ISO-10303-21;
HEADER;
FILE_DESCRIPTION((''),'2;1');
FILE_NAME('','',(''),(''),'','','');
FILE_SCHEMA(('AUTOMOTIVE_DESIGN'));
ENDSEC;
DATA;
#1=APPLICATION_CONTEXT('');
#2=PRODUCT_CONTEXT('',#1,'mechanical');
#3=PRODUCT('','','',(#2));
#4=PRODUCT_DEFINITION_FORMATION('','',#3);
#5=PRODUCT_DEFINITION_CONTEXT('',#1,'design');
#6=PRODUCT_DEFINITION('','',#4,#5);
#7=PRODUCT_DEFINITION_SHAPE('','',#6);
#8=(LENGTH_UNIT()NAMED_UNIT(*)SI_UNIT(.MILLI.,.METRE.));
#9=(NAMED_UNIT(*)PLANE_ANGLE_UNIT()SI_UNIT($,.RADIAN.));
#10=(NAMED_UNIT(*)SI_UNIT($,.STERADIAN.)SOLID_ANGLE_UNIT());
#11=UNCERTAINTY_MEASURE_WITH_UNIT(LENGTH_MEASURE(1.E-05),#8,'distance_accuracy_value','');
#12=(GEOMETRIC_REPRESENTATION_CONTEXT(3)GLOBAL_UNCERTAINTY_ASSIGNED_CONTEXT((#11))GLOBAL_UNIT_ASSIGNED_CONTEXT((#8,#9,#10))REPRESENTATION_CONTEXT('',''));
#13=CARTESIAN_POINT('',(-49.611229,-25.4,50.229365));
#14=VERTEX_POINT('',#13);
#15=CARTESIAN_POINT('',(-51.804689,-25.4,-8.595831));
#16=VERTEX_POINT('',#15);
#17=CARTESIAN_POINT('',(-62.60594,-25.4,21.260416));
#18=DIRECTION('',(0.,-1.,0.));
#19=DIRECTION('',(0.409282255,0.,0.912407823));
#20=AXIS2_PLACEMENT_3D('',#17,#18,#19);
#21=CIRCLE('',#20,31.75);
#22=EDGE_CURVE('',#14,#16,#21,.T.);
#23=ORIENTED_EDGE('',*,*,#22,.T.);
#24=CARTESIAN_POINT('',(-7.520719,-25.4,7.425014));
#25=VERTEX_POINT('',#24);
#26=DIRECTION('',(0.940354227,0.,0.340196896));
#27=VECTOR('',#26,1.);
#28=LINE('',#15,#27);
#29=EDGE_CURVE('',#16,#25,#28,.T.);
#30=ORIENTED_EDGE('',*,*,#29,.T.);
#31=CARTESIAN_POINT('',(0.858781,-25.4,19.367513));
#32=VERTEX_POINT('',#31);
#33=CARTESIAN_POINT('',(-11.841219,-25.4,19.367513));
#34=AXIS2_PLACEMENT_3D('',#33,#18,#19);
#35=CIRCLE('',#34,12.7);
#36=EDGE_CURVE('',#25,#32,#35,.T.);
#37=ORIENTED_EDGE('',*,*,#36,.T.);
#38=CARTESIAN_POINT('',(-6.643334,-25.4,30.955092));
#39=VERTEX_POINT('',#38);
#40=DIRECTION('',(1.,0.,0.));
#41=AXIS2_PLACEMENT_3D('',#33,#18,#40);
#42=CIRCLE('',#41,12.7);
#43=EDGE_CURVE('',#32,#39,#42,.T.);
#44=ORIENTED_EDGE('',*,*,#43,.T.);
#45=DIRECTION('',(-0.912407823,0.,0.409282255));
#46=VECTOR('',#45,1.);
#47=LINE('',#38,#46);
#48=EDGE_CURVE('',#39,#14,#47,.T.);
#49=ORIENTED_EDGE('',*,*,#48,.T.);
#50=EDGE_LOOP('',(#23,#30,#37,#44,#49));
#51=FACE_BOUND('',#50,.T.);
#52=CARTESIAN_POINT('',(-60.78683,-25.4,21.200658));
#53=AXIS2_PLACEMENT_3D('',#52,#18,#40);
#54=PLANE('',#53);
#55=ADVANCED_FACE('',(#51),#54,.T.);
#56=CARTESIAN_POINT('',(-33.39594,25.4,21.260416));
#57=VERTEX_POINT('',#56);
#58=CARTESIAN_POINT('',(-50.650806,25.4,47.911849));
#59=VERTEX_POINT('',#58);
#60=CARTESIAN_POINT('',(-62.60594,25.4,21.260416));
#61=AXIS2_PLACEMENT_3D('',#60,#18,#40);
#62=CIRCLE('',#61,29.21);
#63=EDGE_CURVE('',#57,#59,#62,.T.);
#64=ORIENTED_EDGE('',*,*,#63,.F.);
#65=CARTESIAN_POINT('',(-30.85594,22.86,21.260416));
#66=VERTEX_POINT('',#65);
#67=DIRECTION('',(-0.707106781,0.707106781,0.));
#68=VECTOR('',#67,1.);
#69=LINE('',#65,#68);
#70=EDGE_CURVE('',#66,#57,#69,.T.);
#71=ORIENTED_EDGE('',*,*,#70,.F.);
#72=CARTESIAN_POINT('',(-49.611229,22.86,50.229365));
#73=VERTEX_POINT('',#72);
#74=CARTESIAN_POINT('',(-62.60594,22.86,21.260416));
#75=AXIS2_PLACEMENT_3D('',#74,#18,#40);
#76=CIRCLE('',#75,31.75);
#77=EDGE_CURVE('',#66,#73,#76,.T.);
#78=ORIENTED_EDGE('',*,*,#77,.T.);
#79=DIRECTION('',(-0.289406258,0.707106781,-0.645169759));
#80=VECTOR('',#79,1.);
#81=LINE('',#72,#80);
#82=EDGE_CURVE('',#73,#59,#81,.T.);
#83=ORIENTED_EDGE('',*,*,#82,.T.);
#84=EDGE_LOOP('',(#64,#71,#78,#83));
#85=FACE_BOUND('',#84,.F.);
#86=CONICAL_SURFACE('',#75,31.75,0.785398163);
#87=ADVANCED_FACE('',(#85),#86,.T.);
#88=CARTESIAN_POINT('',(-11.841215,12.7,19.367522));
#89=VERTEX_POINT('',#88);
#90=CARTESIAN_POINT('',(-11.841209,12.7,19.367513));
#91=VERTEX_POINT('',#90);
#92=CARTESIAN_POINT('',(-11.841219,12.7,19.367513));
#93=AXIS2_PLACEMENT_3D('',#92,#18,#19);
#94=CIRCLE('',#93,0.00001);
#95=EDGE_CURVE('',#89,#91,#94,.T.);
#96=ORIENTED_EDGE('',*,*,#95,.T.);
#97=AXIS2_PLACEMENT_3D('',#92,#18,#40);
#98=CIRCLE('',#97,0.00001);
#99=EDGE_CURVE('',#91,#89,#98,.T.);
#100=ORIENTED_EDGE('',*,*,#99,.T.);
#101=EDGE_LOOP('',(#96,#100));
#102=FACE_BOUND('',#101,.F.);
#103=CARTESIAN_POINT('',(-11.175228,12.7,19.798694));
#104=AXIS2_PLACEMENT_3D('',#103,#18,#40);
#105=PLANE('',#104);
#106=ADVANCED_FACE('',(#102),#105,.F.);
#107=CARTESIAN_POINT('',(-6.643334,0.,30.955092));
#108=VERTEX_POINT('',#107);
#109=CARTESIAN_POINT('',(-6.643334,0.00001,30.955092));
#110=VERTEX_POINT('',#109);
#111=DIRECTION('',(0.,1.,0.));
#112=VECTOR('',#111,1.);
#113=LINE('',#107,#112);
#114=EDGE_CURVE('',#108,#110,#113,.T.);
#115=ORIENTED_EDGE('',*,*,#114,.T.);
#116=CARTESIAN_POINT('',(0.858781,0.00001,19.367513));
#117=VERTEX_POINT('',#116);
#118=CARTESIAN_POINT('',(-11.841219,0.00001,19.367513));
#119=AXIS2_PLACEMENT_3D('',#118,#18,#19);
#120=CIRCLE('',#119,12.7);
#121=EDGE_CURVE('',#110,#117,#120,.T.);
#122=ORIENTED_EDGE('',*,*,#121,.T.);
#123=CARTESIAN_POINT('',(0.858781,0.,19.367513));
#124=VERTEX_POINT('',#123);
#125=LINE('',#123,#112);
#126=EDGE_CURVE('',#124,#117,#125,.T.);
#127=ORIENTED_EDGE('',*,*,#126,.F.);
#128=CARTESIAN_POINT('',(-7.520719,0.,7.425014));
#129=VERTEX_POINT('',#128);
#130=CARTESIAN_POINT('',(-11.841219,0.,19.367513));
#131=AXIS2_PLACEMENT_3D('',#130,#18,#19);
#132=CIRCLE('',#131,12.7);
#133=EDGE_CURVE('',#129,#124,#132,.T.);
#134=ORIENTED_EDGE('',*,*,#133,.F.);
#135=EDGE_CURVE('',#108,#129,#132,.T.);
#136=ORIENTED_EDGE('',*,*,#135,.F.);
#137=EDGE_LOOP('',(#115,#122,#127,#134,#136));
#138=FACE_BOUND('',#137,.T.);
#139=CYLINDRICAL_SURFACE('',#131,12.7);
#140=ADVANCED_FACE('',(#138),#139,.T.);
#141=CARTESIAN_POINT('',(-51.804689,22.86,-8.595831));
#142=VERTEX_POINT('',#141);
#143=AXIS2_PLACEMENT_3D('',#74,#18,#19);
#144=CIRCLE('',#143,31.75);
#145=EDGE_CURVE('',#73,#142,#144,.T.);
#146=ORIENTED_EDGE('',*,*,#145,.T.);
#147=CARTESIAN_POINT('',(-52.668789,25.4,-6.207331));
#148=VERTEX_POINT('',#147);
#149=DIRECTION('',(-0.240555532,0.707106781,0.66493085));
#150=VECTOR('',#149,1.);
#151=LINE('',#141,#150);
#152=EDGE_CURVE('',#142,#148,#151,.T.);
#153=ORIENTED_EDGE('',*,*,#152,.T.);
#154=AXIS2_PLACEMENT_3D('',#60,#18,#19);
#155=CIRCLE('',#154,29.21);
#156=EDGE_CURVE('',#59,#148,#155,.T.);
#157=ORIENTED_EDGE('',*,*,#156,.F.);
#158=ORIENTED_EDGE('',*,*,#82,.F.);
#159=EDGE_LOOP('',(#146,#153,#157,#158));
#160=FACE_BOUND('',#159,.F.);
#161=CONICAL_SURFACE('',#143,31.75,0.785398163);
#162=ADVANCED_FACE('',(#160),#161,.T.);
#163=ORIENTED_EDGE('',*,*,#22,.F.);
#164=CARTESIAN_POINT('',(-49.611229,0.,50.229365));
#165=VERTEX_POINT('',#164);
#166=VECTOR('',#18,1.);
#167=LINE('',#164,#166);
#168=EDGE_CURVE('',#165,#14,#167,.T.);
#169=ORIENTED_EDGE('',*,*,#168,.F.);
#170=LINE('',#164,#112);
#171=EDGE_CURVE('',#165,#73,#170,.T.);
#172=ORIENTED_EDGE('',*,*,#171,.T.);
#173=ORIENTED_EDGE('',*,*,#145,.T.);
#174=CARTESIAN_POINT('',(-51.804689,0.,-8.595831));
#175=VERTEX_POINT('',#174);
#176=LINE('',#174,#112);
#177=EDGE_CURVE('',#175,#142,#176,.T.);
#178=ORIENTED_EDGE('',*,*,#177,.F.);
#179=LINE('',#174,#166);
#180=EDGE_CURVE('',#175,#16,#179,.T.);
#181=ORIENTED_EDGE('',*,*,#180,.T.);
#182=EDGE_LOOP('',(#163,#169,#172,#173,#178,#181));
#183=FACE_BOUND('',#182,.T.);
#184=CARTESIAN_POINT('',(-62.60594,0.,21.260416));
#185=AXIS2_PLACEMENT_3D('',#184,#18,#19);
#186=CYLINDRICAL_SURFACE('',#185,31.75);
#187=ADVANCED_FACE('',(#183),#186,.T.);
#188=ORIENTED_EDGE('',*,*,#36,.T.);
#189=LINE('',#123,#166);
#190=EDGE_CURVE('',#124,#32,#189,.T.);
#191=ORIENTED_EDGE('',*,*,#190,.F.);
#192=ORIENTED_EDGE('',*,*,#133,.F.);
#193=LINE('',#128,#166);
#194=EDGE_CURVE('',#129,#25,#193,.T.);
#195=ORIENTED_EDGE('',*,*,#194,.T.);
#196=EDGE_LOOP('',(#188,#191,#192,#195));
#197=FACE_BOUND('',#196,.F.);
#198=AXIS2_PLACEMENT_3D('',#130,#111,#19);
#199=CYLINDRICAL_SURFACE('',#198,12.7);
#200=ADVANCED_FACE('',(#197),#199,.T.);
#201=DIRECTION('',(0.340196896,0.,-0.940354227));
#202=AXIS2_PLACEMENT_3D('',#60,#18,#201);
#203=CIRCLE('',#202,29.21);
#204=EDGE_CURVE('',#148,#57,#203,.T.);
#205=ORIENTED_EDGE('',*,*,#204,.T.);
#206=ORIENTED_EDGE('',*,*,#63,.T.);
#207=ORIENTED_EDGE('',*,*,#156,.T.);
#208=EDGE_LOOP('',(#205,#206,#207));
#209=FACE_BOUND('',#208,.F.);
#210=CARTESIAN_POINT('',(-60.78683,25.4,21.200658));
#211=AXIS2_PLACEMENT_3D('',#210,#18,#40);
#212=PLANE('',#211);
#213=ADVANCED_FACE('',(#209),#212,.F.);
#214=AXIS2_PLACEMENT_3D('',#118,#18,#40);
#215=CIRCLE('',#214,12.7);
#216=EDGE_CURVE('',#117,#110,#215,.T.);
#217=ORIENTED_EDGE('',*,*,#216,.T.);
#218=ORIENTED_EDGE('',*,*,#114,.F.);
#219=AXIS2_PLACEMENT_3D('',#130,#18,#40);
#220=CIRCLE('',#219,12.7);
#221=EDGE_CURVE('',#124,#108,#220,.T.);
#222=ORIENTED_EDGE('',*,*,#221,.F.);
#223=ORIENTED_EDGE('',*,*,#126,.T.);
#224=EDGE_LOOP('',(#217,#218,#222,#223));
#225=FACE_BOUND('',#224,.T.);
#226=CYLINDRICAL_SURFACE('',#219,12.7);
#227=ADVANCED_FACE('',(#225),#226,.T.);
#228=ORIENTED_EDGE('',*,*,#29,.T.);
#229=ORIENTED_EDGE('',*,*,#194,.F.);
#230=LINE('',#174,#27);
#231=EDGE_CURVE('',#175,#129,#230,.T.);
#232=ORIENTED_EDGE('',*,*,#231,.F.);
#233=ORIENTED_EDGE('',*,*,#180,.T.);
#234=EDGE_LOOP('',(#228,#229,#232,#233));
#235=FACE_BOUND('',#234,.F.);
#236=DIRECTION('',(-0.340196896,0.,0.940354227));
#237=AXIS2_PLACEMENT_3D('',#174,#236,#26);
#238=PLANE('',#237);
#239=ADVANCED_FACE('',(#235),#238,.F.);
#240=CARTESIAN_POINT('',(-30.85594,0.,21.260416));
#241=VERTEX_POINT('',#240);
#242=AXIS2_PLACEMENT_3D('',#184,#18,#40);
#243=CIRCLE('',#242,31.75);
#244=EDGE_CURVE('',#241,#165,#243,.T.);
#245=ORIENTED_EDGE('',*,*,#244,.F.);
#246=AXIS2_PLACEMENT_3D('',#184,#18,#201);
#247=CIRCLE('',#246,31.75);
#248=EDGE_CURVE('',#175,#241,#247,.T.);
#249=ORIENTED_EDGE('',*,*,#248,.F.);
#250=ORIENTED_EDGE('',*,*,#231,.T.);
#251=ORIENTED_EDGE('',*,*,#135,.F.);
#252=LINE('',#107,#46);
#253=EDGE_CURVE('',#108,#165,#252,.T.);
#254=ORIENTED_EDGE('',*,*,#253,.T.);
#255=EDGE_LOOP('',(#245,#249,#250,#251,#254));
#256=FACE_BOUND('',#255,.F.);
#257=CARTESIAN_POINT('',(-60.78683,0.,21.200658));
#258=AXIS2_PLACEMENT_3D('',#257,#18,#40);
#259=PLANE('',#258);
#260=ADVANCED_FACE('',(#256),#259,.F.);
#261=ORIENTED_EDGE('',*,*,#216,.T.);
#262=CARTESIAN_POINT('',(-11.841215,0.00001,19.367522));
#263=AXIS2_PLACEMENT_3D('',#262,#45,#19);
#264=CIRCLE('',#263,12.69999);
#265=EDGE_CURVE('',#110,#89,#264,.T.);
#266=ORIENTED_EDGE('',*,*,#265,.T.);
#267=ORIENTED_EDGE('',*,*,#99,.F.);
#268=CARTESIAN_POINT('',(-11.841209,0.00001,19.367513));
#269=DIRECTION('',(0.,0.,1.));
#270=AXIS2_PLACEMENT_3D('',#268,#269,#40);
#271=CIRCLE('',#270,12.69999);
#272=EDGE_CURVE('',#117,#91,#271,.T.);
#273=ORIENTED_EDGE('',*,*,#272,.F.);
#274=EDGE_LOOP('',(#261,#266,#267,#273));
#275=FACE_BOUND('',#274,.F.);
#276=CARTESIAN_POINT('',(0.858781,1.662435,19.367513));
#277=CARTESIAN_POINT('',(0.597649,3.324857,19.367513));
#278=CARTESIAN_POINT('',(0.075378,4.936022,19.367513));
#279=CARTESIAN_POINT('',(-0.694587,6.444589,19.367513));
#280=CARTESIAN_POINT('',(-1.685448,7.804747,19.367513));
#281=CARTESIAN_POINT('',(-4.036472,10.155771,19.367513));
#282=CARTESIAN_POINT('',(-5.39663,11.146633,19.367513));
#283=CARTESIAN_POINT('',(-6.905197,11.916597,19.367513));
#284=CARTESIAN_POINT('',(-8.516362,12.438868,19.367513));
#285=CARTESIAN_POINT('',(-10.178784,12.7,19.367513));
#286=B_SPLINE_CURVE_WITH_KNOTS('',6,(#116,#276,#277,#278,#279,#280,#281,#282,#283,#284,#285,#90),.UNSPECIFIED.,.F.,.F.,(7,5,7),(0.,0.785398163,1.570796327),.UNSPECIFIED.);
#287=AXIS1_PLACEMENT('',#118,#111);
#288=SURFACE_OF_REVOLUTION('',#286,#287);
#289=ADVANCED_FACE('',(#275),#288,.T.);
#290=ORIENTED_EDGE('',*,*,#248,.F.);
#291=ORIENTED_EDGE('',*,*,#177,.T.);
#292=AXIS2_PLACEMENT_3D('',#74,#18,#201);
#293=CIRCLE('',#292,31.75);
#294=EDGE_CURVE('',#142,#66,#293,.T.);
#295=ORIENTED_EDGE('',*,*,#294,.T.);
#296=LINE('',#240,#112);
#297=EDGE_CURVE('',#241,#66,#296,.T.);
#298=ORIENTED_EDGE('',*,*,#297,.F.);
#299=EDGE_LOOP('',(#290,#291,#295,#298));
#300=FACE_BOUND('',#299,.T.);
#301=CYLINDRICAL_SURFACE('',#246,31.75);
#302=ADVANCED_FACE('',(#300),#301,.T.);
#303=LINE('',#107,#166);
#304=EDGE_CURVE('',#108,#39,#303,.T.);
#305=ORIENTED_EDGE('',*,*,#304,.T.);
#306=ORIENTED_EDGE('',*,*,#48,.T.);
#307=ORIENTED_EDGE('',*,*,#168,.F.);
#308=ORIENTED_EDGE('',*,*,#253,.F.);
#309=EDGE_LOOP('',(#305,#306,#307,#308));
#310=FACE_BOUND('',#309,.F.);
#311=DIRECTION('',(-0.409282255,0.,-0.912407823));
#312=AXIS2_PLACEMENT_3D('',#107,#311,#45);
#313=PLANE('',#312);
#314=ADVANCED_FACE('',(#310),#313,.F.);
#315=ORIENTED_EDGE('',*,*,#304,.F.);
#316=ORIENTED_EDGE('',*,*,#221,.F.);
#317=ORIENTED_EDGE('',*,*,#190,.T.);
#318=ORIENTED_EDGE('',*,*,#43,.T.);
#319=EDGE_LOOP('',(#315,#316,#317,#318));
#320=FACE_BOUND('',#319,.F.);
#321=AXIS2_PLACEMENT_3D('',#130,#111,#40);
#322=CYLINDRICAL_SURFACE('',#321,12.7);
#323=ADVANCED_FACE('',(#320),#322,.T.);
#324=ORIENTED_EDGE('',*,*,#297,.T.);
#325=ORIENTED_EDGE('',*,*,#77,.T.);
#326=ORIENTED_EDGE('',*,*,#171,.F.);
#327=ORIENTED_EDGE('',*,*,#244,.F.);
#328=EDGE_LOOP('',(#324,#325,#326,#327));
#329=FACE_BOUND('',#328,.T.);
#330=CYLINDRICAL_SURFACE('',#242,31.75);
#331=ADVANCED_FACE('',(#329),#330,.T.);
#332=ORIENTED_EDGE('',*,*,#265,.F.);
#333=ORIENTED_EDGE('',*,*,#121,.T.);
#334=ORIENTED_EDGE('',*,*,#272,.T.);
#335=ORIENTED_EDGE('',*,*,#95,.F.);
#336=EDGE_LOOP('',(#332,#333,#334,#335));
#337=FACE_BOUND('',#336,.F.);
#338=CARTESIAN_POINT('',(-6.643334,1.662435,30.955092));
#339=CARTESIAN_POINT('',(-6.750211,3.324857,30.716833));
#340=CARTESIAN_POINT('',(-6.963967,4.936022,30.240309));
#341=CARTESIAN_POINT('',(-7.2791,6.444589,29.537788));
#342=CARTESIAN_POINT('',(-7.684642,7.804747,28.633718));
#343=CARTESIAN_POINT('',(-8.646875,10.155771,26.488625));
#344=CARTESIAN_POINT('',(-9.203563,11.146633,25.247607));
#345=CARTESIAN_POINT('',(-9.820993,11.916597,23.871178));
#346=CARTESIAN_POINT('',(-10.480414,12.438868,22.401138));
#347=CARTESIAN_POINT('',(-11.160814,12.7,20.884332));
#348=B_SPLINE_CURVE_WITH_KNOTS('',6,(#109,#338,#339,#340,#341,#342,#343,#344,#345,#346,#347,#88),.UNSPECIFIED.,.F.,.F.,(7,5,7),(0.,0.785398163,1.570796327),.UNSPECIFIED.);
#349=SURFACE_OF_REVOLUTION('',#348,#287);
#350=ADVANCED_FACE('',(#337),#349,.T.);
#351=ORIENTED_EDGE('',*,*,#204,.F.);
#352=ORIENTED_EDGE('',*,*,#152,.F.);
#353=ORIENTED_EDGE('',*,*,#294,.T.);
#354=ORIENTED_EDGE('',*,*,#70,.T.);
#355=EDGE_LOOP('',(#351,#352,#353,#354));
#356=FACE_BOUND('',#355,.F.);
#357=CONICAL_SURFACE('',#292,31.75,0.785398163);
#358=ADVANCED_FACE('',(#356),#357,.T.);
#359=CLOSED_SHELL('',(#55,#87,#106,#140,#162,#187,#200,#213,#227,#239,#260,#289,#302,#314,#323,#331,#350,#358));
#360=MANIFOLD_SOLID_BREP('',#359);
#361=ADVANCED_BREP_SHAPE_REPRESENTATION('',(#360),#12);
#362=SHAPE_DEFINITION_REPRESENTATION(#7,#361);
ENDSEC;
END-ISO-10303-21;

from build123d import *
from build123d import SkipClean  # not in build123d's __all__

# Parameters (mm, degrees)
F1_DEPTH = 25.4
F2_DEPTH = 25.4
F3_DEPTH = 12.7
F4_R     = 12.69999
F5_SIZE  = 2.54


# Not quite as in the source:
# - a fillet or chamfer is up to 0.001 mm smaller than in the source, because OpenCascade refuses the exact size
# - after a boolean that leaves OpenCascade's solid faulty, fix() repairs it


with BuildPart() as f1:
    # F0 (on Front) → F1 (new body)
    with BuildSketch(Plane.XZ):
        with BuildLine():
            ThreePointArc((-51.8046888554, -8.5958305632), (-36.6155359926, 3.0241505339), (-30.8559403173, 21.2604161342))
            ThreePointArc((-30.8559403173, 21.2604161342), (-35.9540680262, 38.515566188), (-49.6112287191, 50.2293645183))
            ThreePointArc((-49.6112287191, 50.2293645183), (-94.3338910639, 22.443480552), (-51.8046888554, -8.5958305632))
        make_face()
        with BuildLine():
            ThreePointArc((-49.6112287191, 50.2293645183), (-35.9540680262, 38.515566188), (-30.8559403173, 21.2604161342))
            ThreePointArc((-30.8559403173, 21.2604161342), (-36.6155359926, 3.0241505339), (-51.8046888554, -8.5958305632))
            Line((-51.8046888554, -8.5958305632), (-7.5207185378, 7.4250143868))
            ThreePointArc((-7.5207185378, 7.4250143868), (-24.5323994212, 19.8407388329), (-6.6433344833, 30.9550924194))
            Line((-6.6433344833, 30.9550924194), (-49.6112287191, 50.2293645183))
        make_face()
        with BuildLine():
            ThreePointArc((0.8587808774, 19.3675130658), (-1.1804702061, 26.2695730873), (-6.6433344833, 30.9550924194))
            ThreePointArc((-6.6433344833, 30.9550924194), (-24.5323994212, 19.8407388329), (-7.5207185378, 7.4250143868))
            ThreePointArc((-7.5207185378, 7.4250143868), (-1.4450573927, 12.0730068257), (0.8587808774, 19.3675130658))
        make_face()
    extrude(amount=F1_DEPTH)

    # F0 (on Front) → F2 (join)
    with BuildSketch(Plane.XZ):
        with BuildLine():
            ThreePointArc((-51.8046888554, -8.5958305632), (-36.6155359926, 3.0241505339), (-30.8559403173, 21.2604161342))
            ThreePointArc((-30.8559403173, 21.2604161342), (-35.9540680262, 38.515566188), (-49.6112287191, 50.2293645183))
            ThreePointArc((-49.6112287191, 50.2293645183), (-94.3338910639, 22.443480552), (-51.8046888554, -8.5958305632))
        make_face()
    with SkipClean():  # cleaning this boolean's faces spoils the solid; the shape is the same uncleaned
        extrude(amount=-F2_DEPTH)

    # F0 (on Front) → F3 (join)
    with BuildSketch(Plane.XZ):
        with BuildLine():
            ThreePointArc((0.8587808774, 19.3675130658), (-1.1804702061, 26.2695730873), (-6.6433344833, 30.9550924194))
            ThreePointArc((-6.6433344833, 30.9550924194), (-24.5323994212, 19.8407388329), (-7.5207185378, 7.4250143868))
            ThreePointArc((-7.5207185378, 7.4250143868), (-1.4450573927, 12.0730068257), (0.8587808774, 19.3675130658))
        make_face()
    extrude(amount=-F3_DEPTH)

    add(f1.part.fix(), mode=Mode.REPLACE)

    # F4 (radius 12.7 in the source; OpenCascade refuses exactly that, so slightly less here)
    f4_edges = [f1.edges().sort_by_distance(p)[0] for p in [
        (-16.16172, 12.7, 31.310012),
    ]]
    fillet(f4_edges, radius=F4_R)

    # F5
    f5_edges = [f1.edges().sort_by_distance(p)[0] for p in [
        (-73.407192, 25.4, 51.116663),
    ]]
    chamfer(f5_edges, length=F5_SIZE)


solid = f1.part
